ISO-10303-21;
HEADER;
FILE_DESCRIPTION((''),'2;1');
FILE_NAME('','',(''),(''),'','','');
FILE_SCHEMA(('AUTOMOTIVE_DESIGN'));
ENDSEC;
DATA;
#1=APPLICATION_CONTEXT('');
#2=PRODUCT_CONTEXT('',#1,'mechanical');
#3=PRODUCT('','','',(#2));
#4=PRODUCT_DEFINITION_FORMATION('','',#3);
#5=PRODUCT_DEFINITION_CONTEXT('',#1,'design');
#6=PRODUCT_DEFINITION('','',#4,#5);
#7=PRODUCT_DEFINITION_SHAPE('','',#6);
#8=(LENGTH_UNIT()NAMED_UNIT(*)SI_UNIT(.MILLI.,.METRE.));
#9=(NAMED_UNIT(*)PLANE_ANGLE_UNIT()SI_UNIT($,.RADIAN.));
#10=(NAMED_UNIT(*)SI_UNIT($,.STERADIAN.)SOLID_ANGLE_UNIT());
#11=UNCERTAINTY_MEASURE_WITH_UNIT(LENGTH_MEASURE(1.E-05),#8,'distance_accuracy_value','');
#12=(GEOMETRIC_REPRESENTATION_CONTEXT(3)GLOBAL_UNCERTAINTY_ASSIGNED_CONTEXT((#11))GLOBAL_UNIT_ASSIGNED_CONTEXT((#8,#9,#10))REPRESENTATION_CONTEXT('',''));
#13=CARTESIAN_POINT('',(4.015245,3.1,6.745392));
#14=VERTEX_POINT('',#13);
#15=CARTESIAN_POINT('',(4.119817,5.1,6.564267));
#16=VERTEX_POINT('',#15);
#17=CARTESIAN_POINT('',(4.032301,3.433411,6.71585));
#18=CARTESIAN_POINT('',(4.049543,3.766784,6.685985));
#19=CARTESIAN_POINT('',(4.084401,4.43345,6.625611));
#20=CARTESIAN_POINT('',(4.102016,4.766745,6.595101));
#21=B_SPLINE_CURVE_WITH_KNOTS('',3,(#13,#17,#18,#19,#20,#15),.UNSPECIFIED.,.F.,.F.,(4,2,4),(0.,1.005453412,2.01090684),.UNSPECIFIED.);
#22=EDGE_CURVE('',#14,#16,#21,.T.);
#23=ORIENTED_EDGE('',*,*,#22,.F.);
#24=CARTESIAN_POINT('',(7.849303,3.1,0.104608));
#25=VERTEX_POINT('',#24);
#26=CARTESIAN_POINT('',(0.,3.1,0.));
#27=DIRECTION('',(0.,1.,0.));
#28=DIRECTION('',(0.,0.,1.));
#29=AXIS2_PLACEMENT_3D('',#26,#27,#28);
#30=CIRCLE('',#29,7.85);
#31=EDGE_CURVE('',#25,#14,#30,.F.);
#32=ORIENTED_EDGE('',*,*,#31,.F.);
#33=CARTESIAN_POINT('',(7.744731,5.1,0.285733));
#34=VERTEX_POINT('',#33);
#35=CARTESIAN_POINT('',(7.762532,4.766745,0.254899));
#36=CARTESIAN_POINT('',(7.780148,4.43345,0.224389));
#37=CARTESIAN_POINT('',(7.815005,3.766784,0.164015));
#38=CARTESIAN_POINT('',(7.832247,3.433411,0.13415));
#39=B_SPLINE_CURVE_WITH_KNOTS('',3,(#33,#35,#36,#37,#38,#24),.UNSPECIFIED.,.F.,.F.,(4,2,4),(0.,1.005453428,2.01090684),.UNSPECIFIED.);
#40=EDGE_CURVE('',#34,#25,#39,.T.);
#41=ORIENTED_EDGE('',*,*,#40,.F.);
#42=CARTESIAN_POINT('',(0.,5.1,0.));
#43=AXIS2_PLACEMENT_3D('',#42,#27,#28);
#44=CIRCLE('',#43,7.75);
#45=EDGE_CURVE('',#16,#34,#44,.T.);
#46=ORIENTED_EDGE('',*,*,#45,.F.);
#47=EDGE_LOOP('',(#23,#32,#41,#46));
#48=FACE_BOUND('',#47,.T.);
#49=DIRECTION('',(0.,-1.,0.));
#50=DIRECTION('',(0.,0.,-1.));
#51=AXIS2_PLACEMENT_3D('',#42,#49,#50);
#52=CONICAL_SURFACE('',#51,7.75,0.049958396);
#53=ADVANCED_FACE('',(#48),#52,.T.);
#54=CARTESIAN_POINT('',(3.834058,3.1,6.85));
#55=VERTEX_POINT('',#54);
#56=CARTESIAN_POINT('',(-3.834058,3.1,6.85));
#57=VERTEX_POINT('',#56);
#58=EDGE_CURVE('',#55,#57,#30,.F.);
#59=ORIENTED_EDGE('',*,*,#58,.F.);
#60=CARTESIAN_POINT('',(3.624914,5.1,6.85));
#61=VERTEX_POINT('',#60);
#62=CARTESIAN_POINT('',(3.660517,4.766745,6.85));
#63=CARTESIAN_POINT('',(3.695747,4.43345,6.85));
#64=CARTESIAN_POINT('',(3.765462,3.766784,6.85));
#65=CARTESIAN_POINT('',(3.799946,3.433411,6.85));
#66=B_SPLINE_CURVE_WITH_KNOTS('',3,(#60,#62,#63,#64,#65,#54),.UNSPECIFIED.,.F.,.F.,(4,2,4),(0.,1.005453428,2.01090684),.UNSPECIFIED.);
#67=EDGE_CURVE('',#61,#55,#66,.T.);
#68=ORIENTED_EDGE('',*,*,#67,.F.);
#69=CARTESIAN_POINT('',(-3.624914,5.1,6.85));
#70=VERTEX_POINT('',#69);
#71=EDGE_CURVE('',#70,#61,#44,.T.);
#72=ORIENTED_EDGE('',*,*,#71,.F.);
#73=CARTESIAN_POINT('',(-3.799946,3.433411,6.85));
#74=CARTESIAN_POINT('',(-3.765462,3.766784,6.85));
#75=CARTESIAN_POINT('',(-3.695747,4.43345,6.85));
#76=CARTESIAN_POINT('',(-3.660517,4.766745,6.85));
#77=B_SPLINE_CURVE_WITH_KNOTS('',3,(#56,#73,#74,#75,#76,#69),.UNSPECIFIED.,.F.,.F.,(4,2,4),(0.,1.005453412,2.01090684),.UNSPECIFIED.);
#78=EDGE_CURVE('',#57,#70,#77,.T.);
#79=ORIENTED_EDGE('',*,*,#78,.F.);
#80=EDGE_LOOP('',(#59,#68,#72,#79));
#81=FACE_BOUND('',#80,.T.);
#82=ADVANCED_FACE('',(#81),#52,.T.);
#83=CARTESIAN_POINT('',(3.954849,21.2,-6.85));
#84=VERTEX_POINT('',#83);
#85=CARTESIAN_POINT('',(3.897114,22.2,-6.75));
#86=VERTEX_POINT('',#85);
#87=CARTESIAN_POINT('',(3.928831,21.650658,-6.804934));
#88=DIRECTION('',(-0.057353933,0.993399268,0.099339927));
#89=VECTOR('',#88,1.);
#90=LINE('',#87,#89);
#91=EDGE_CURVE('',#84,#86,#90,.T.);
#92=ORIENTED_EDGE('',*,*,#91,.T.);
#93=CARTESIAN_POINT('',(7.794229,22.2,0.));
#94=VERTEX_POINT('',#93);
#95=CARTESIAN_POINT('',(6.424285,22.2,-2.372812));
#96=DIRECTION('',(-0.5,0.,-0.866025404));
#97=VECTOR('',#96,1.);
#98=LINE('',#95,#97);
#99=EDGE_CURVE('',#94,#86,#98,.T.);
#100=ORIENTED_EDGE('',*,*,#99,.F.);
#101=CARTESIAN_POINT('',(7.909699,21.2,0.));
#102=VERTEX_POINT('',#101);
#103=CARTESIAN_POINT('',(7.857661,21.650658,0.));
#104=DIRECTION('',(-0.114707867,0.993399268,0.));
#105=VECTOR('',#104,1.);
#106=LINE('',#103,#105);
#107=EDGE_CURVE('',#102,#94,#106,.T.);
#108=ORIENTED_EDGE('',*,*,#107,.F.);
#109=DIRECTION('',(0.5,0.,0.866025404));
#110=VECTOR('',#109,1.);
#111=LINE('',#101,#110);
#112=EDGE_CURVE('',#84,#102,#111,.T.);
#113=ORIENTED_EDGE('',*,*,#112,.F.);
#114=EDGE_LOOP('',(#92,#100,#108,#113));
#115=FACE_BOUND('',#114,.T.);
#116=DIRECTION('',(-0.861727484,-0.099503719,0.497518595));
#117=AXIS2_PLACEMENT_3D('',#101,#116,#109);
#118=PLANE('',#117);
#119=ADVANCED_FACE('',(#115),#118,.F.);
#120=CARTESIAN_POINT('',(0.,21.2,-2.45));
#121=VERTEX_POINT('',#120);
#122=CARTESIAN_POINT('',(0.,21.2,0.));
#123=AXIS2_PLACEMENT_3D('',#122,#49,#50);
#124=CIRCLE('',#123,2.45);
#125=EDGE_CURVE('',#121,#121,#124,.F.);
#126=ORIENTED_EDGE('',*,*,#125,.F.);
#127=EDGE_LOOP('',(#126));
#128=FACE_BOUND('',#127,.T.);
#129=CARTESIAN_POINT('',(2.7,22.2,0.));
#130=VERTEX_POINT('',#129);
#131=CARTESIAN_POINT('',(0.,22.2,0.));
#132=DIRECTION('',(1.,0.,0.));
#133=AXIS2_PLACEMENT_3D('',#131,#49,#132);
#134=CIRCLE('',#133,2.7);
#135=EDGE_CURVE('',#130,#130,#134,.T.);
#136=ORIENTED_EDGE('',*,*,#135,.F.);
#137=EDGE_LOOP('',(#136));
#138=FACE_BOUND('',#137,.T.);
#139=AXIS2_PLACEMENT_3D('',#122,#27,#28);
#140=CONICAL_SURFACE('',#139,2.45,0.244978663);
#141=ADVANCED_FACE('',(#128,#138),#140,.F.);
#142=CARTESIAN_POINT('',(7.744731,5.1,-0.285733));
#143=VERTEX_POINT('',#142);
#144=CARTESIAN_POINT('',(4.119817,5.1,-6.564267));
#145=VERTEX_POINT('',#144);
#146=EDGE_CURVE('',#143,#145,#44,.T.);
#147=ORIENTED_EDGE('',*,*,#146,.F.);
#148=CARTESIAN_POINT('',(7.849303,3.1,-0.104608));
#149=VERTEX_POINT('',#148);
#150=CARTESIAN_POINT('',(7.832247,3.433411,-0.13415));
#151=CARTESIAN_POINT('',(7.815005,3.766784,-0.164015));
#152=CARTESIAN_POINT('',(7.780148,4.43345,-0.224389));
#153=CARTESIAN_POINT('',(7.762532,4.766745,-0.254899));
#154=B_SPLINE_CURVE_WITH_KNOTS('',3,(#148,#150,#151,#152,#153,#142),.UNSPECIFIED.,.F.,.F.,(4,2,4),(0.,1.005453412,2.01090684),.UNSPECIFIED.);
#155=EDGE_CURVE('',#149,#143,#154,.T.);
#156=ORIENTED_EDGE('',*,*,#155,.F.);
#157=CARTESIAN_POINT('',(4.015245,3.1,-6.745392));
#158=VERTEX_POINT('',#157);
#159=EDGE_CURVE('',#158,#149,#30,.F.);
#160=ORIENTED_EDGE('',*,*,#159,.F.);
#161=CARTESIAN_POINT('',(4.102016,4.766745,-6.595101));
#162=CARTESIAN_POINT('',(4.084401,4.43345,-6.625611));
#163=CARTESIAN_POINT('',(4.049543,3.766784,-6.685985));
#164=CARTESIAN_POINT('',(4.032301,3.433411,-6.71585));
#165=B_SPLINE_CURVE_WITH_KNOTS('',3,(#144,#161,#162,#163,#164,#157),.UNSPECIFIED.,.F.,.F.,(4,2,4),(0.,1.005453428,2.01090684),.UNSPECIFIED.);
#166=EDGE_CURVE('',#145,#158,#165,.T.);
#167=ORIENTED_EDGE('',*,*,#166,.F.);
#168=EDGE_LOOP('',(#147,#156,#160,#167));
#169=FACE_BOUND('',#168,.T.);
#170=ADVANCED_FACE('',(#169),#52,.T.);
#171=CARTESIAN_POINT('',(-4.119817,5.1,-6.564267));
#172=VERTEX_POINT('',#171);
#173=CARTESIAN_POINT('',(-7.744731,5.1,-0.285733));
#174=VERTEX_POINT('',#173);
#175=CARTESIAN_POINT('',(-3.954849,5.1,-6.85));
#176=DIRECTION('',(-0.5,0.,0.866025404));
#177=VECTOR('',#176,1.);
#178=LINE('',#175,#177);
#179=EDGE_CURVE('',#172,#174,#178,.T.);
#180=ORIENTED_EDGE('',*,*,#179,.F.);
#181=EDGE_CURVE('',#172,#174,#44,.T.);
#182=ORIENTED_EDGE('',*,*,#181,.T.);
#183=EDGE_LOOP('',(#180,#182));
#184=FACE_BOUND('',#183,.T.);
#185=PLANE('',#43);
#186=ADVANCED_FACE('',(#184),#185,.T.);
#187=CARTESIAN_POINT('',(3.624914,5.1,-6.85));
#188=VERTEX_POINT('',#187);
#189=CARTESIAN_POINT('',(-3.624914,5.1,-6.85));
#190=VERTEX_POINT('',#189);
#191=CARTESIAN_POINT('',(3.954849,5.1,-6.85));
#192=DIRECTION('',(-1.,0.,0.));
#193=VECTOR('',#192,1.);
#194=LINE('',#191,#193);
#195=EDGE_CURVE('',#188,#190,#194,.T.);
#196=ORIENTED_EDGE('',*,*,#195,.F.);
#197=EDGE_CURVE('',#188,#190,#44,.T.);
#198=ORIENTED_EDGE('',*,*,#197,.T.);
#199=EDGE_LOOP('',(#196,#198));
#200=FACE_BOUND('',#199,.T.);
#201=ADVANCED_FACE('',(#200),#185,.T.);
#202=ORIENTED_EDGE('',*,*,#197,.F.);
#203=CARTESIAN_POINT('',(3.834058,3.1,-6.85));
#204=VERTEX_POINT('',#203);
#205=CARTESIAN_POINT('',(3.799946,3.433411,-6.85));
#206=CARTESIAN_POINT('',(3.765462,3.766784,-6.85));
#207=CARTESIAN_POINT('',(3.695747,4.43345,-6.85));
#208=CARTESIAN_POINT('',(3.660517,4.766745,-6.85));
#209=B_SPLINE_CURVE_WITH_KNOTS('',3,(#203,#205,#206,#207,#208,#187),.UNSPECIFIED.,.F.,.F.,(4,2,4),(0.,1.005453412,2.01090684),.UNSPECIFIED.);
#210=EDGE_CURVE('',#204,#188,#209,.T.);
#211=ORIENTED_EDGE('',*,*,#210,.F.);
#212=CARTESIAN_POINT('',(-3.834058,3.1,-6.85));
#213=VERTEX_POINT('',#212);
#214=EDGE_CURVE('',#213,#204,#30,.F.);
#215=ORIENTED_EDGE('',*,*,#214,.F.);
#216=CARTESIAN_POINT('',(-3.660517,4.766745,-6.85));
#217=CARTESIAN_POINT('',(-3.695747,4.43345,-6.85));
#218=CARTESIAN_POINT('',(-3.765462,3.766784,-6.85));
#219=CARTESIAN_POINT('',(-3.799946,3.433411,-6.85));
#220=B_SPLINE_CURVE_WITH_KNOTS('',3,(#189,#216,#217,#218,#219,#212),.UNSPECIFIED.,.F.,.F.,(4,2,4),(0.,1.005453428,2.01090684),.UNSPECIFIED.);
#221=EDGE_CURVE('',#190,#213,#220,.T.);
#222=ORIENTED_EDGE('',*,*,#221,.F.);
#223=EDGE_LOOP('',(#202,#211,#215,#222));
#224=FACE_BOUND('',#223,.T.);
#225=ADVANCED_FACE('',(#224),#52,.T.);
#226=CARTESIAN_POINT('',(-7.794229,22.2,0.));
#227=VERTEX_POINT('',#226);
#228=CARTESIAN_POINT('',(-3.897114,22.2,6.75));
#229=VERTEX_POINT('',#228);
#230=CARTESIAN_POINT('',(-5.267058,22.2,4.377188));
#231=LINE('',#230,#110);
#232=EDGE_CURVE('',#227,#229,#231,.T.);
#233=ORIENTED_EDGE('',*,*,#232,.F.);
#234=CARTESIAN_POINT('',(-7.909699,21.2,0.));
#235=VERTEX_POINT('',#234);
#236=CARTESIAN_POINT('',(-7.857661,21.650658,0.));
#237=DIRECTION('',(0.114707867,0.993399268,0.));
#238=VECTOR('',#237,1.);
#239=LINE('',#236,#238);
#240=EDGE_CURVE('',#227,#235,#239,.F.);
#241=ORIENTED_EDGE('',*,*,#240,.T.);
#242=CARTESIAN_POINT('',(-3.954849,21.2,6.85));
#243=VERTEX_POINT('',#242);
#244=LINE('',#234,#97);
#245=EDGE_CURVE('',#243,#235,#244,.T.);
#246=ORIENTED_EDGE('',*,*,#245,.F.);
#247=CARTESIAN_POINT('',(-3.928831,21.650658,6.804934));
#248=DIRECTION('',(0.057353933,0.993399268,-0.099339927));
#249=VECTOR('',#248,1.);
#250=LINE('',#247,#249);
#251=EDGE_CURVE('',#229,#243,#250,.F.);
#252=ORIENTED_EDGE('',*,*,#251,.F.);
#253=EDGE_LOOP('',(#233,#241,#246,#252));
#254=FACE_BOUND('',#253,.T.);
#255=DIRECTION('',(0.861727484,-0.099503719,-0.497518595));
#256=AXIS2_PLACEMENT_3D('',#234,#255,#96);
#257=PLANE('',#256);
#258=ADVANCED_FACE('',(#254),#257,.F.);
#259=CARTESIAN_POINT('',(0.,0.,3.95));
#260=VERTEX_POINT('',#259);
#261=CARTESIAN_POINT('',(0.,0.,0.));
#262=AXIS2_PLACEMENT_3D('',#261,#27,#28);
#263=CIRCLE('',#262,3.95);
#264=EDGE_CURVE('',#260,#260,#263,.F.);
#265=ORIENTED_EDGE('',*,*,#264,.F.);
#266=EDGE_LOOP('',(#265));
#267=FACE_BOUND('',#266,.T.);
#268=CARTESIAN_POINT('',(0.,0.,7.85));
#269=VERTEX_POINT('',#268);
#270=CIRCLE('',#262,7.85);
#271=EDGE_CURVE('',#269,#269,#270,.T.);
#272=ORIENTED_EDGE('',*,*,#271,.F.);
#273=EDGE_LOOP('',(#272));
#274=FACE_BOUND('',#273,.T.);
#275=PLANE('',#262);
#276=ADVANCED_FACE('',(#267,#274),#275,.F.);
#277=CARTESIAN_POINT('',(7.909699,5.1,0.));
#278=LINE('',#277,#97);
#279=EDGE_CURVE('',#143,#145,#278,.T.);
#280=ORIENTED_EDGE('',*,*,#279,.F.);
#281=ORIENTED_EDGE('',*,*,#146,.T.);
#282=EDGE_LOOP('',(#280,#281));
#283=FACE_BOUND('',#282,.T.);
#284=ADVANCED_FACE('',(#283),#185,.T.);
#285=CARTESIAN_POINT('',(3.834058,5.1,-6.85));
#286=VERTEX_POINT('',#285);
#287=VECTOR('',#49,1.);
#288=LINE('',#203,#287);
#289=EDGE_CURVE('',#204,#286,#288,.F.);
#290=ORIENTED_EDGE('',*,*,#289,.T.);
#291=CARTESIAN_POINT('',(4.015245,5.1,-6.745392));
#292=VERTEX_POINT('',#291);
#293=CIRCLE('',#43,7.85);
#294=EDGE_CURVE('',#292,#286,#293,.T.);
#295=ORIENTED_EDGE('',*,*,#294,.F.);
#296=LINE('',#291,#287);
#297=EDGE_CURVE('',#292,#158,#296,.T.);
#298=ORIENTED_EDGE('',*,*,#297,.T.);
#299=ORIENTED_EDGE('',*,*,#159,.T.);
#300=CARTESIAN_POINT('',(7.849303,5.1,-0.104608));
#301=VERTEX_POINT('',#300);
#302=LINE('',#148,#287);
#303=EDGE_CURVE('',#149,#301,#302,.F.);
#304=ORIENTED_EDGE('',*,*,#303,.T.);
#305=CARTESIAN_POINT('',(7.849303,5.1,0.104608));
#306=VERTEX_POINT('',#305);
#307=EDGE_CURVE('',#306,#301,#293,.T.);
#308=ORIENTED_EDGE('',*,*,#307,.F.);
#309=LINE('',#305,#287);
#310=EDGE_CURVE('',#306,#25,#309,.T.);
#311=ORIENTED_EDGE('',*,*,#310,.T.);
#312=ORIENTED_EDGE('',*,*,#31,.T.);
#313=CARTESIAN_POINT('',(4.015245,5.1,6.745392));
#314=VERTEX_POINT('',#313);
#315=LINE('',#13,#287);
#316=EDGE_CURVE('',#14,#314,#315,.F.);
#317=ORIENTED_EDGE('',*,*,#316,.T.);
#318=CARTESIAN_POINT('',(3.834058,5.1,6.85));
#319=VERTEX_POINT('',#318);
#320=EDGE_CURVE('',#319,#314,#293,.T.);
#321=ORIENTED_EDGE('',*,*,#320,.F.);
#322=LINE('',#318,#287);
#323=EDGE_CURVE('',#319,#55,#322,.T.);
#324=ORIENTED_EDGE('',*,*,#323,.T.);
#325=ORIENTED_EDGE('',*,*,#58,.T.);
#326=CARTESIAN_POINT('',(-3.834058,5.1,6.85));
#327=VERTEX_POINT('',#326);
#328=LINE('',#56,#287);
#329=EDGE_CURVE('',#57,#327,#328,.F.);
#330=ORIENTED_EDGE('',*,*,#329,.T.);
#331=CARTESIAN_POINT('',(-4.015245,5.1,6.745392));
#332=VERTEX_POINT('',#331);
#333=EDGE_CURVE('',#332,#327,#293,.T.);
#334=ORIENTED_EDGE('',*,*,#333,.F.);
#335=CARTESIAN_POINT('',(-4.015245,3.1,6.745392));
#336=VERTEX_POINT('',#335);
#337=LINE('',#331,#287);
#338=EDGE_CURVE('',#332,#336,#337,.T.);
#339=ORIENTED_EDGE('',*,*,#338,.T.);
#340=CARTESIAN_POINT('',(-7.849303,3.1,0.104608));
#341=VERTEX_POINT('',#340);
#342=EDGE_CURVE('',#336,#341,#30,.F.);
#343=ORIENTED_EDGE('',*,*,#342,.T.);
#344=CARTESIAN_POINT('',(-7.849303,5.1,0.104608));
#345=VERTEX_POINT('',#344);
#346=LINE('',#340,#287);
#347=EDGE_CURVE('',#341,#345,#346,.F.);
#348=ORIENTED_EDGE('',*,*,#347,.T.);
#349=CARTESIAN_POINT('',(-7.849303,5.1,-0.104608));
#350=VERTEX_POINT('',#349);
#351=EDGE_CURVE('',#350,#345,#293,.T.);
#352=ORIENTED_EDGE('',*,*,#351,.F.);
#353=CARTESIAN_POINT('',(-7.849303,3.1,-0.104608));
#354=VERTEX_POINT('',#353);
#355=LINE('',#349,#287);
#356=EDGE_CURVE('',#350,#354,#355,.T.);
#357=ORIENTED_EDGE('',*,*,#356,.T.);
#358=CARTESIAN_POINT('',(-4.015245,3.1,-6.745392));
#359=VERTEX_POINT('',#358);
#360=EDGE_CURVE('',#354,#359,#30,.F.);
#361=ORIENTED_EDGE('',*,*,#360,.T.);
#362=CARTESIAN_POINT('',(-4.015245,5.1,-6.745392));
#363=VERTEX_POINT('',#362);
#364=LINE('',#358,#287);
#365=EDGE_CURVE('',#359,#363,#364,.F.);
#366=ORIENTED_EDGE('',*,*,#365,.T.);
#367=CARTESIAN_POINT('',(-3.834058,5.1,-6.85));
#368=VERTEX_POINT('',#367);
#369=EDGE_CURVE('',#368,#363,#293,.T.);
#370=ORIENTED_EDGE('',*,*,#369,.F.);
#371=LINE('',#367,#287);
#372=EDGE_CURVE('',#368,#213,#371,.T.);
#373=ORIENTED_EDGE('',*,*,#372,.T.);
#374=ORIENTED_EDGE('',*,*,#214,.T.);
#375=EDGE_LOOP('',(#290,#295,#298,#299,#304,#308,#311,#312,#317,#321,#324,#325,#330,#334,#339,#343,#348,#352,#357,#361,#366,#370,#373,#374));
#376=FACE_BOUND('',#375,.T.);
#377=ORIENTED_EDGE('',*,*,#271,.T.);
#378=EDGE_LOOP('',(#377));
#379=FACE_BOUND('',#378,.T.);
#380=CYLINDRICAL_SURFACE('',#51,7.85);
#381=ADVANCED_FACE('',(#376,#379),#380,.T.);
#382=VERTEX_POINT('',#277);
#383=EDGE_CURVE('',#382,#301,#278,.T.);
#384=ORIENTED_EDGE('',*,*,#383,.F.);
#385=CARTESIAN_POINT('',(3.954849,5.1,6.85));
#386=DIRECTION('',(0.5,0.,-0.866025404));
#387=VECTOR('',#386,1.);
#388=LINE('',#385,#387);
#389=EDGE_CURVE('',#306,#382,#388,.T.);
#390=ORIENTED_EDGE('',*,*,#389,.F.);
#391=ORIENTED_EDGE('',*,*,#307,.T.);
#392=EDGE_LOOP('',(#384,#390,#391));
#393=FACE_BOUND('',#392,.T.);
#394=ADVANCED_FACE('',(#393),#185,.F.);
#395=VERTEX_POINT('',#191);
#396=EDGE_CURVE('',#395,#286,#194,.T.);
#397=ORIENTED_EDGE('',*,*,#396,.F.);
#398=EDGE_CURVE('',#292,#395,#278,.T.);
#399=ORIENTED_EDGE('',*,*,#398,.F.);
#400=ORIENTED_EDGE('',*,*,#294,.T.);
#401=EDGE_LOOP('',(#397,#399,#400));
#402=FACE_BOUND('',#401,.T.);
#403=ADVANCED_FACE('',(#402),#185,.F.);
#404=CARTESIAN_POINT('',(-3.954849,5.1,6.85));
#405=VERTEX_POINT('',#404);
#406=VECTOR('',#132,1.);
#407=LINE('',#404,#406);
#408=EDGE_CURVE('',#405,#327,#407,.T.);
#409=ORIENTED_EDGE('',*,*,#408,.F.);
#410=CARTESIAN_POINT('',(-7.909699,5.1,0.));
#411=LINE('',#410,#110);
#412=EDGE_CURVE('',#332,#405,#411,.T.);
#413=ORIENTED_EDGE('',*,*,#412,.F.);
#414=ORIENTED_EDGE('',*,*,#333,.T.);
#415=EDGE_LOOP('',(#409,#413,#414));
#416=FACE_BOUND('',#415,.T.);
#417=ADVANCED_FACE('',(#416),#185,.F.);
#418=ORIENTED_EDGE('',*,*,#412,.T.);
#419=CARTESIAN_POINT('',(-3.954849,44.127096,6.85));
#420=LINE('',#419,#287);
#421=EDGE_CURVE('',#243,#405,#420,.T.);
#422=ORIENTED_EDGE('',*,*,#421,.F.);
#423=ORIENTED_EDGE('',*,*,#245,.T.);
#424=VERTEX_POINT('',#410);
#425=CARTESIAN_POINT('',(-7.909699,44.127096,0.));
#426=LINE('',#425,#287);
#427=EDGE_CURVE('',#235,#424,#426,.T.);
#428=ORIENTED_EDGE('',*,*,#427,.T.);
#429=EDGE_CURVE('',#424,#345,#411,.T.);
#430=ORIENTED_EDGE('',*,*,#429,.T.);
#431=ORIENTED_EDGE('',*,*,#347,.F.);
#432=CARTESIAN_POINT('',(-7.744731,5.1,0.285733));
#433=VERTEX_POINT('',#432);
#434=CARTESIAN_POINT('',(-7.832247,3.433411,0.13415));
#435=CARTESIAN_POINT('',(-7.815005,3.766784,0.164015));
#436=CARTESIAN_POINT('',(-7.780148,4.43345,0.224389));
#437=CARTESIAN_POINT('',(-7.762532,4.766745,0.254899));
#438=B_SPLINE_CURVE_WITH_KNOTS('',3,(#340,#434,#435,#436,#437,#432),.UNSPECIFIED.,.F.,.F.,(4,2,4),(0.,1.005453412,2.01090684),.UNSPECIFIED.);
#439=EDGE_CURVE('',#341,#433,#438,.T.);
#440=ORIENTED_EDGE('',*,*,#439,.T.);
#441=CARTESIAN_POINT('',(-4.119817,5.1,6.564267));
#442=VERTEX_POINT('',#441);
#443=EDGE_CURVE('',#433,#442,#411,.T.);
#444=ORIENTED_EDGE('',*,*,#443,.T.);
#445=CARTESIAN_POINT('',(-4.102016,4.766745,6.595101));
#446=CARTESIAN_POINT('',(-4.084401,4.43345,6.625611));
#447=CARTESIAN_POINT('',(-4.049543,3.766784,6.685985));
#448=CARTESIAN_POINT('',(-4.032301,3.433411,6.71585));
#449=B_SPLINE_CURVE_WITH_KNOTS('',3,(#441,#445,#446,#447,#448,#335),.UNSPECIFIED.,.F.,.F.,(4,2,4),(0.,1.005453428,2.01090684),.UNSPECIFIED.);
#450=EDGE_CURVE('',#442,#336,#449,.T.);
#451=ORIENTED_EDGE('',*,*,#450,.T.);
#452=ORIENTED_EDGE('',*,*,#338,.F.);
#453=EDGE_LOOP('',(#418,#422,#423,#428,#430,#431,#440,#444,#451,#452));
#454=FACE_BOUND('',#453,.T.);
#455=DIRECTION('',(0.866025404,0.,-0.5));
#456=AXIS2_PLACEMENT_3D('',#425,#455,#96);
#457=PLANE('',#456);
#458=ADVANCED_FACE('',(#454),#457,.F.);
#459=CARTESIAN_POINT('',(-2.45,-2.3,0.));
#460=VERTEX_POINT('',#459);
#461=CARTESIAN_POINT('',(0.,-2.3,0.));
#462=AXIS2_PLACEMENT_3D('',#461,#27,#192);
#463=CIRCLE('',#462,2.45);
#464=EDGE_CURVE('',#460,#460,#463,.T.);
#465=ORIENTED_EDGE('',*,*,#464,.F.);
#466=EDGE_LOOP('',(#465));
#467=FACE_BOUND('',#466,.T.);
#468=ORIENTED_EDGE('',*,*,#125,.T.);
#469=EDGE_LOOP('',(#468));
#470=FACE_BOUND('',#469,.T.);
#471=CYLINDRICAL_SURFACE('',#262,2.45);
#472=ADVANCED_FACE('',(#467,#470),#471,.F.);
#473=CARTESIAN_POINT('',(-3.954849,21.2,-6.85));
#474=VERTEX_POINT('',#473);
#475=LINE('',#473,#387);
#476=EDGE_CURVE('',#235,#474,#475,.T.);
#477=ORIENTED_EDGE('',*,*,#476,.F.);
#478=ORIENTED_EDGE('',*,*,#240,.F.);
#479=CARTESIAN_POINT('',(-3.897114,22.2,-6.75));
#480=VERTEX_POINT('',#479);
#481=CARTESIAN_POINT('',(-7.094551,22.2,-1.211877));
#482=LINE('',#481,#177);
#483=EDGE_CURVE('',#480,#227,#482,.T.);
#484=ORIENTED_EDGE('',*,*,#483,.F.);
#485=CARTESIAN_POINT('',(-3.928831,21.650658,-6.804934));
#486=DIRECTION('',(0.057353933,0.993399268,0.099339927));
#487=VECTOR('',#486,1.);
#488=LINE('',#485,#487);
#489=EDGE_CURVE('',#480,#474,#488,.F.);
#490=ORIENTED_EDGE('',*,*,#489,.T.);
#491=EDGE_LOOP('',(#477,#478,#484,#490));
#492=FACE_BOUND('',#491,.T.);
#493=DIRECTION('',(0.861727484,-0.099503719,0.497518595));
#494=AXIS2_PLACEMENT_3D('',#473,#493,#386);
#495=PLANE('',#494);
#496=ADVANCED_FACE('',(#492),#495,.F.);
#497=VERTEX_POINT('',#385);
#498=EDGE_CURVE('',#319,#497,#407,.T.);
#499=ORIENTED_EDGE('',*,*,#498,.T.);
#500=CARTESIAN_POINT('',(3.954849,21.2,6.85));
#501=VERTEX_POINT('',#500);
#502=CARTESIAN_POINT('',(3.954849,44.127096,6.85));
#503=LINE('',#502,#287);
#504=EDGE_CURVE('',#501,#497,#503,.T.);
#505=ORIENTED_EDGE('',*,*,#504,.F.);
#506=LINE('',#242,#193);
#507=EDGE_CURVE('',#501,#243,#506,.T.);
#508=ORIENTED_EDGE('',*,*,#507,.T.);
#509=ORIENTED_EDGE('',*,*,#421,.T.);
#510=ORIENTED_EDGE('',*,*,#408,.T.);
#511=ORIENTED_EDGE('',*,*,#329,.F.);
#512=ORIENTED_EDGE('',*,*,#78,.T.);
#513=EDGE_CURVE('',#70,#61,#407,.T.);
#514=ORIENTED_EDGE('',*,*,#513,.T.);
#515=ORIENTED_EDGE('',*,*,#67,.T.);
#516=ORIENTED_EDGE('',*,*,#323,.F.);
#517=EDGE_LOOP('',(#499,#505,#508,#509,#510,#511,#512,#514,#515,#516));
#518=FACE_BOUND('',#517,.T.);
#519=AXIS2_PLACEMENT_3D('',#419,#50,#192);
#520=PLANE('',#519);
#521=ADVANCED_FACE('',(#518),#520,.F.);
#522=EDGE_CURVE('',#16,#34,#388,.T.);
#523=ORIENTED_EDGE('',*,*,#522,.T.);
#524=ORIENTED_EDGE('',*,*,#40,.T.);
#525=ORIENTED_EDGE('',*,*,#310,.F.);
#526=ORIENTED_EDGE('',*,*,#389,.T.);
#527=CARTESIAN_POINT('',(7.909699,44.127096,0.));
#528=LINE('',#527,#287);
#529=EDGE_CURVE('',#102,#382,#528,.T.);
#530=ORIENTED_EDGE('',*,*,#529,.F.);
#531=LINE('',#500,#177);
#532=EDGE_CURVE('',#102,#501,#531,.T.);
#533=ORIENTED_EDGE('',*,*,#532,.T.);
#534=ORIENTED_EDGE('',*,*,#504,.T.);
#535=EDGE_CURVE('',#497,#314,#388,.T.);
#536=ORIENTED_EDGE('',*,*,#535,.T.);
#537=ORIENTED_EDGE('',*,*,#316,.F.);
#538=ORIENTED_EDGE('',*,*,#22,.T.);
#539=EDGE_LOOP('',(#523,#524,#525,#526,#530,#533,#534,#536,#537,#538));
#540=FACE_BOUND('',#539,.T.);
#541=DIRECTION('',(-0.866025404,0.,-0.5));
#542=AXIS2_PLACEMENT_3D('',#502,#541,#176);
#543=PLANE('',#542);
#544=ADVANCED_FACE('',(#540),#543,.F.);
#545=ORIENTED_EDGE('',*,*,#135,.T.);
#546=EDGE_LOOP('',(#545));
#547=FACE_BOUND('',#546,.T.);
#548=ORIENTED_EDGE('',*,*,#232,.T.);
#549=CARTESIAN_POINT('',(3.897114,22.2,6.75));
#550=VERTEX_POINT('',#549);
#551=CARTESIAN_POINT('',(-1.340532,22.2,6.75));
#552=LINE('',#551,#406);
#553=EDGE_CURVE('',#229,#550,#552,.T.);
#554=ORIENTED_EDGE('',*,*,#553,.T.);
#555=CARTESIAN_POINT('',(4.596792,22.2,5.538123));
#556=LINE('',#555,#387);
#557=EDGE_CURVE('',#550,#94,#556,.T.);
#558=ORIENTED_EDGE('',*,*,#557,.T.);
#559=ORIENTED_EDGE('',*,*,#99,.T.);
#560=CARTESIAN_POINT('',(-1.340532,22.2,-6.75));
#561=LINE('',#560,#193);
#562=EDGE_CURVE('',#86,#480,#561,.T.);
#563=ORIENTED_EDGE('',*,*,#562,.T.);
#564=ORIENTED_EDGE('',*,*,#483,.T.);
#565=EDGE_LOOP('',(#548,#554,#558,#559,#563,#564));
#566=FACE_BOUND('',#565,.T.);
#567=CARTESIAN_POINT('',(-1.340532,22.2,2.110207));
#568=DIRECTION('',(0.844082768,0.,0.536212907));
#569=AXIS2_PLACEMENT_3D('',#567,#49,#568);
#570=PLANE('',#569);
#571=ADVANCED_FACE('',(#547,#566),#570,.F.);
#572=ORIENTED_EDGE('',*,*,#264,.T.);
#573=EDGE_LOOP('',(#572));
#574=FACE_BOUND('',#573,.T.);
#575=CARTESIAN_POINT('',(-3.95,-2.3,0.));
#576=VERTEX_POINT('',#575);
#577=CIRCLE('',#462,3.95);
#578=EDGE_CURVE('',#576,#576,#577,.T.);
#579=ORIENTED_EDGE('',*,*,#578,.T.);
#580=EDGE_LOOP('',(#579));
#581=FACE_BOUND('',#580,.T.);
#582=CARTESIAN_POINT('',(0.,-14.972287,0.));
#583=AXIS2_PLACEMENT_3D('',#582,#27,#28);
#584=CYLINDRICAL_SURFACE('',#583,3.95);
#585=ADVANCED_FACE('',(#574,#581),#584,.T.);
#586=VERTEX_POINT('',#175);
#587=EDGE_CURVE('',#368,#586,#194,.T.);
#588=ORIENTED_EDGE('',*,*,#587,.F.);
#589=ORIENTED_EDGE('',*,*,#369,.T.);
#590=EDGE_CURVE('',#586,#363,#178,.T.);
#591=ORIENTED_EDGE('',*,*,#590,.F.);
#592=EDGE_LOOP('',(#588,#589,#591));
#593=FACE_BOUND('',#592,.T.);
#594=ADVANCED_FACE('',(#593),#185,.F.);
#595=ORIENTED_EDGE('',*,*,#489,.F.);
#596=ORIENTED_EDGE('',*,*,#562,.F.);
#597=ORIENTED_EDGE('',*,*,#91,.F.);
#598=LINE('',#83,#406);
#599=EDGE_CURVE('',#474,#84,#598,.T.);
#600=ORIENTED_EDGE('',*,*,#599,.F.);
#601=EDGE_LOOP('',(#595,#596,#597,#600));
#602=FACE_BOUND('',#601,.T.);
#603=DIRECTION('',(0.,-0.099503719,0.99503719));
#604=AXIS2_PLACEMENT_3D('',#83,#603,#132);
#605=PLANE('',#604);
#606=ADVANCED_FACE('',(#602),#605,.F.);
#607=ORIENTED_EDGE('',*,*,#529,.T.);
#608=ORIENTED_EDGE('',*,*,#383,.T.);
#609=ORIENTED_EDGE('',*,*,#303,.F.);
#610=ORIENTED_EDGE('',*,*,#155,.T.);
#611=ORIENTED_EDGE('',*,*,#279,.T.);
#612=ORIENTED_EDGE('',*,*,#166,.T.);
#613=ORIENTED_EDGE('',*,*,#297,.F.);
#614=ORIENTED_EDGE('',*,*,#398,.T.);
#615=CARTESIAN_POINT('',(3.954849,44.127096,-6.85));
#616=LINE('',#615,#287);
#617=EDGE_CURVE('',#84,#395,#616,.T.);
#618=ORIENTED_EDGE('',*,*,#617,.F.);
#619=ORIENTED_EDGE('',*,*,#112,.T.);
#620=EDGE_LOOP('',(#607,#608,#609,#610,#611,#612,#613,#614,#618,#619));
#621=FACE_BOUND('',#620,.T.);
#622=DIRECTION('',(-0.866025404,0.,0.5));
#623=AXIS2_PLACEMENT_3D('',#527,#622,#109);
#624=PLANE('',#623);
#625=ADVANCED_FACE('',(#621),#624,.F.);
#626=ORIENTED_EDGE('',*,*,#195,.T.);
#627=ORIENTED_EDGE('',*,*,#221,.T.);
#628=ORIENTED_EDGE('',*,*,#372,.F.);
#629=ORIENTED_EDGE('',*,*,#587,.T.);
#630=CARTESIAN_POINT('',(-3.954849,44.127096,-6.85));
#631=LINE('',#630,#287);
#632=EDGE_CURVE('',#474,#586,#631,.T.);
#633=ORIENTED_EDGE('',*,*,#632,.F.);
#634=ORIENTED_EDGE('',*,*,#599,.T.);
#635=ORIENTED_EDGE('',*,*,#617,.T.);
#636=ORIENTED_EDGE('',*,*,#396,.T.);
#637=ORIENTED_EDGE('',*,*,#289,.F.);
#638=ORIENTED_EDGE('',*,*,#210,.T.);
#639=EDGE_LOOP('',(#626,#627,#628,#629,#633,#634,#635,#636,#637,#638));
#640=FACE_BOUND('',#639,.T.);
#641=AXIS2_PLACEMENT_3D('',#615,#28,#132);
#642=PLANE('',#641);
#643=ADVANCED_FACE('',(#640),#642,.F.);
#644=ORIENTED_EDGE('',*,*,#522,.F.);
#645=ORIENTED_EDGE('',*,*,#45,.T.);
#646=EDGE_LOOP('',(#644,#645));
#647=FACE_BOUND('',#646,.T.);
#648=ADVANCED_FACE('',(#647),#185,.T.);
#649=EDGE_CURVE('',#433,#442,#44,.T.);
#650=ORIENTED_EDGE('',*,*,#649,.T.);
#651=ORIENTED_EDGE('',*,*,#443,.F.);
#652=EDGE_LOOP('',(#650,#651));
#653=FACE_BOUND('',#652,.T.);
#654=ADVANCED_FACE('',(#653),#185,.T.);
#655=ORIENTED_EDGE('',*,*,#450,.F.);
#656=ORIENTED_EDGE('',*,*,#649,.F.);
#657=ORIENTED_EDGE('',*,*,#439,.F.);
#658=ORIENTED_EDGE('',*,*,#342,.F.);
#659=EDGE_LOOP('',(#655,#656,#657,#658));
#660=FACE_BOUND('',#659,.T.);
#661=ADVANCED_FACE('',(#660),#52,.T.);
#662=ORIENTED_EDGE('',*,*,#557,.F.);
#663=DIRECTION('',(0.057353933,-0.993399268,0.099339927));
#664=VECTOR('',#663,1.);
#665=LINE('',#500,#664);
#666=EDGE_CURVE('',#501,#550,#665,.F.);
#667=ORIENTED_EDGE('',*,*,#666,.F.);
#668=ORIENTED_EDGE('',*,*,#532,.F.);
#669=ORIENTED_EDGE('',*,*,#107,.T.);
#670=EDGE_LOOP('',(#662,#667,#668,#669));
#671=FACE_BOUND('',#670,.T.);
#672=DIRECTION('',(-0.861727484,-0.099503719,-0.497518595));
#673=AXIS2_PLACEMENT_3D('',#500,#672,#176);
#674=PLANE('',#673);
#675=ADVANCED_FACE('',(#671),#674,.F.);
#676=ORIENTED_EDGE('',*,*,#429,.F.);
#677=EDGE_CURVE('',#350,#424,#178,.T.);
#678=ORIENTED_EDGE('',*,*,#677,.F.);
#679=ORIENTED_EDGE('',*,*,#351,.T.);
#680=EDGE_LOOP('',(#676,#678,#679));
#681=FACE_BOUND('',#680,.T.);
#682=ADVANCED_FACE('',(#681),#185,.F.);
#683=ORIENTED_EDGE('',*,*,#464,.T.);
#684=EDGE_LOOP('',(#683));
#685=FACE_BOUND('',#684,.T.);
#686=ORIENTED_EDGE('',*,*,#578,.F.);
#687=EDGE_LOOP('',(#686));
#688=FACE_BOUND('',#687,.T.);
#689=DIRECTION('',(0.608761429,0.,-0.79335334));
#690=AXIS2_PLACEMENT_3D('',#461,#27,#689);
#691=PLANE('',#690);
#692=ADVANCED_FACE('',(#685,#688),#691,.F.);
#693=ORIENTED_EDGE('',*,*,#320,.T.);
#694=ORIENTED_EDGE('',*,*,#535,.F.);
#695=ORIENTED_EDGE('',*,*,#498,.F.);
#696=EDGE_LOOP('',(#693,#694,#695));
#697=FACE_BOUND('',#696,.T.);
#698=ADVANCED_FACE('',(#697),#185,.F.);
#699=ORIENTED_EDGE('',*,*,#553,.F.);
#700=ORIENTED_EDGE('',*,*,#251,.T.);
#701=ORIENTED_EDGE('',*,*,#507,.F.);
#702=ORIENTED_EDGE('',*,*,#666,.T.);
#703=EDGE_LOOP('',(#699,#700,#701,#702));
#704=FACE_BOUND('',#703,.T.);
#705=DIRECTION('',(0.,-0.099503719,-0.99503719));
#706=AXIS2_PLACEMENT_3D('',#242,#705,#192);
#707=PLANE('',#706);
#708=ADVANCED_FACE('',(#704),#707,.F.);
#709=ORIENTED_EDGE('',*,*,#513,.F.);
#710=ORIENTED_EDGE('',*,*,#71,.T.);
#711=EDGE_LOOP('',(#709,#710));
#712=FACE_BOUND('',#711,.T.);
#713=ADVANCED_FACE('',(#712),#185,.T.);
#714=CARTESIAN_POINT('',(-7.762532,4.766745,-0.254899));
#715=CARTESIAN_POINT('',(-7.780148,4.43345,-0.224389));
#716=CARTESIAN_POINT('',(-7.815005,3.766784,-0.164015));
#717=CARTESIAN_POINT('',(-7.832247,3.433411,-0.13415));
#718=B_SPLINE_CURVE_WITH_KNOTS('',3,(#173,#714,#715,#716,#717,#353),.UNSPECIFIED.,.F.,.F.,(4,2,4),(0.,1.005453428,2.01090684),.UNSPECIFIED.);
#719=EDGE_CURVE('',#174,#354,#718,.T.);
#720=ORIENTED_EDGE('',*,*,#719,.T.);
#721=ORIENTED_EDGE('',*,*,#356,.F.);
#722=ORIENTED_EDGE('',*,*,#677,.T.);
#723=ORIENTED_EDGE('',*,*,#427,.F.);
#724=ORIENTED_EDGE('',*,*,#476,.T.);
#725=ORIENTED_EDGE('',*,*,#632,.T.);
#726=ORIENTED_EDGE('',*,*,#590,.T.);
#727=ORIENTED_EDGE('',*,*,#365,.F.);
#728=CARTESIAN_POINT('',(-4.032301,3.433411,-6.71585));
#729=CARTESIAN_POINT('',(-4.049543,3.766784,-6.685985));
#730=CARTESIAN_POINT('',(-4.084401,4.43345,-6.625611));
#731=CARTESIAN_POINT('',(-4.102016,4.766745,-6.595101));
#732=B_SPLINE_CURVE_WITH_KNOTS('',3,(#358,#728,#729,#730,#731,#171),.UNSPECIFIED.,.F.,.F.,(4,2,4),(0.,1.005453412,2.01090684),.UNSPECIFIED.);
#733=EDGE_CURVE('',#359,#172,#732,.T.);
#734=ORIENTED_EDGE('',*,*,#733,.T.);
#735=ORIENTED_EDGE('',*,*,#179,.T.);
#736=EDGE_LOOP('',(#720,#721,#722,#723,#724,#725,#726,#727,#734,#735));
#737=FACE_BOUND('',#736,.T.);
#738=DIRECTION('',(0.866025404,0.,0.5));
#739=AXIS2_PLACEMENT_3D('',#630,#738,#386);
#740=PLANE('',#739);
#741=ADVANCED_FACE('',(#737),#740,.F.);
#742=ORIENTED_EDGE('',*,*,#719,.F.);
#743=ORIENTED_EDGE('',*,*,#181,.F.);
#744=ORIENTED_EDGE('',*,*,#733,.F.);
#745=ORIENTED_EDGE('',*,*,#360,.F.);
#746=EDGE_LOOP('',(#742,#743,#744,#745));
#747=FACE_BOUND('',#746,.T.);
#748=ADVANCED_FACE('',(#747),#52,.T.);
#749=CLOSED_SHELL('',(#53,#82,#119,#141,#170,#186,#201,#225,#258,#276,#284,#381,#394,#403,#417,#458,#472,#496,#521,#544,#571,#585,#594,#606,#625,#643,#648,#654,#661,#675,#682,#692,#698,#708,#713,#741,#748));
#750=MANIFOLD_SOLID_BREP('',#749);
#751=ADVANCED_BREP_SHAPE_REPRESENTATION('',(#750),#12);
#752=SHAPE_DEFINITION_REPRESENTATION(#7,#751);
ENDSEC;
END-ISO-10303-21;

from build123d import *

# Parameters (mm, degrees)
SKETCH1_R           = 7.85
BOSS_EXTRUDE1_DEPTH = 5.1
BOSS_EXTRUDE2_DEPTH = 17.1
CHAMFER1_SIZE       = 2
CHAMFER1_SIZE_2     = 0.1
CHAMFER2_SIZE       = 0.1
CHAMFER2_SIZE2      = 1
SKETCH3_R           = 2.45
CUT_EXTRUDE1_DEPTH  = 25.840004697
SKETCH4_R           = 3.95
SKETCH4_R_2         = 2.45
BOSS_EXTRUDE3_DEPTH = 2.3
CHAMFER4_SIZE       = 0.25
CHAMFER4_SIZE2      = 1


with BuildPart() as part:
    # Sketch1 → Boss-Extrude1 (new body)
    with BuildSketch(Plane(origin=(0, 0, 0), x_dir=(1, 0, 0), z_dir=(0, 1, 0))):
        with Locations(Location((0, 0, 0), (0, 0, 270))):
            Circle(SKETCH1_R)
    extrude(amount=BOSS_EXTRUDE1_DEPTH)

    # Sketch2 → Boss-Extrude2 (add)
    with BuildSketch(Plane(origin=(0, 5.1, 0), x_dir=(1, 0, 0), z_dir=(0, 1, 0))):
        Polygon((3.954849344, -6.85), (7.909698688, 0), (3.954849344, 6.85), (-3.954849344, 6.85), (-7.909698688, 0), (-3.954849344, -6.85), align=None)
    extrude(amount=BOSS_EXTRUDE2_DEPTH)

    # Chamfer1
    # the kernel refuses this chamfer: 2, 0.1 mm, written as the material it takes off along each edge
    with BuildSketch(Plane(origin=(0, 5.1, 0), x_dir=(-0.12524723845316335, 0, 0.9921255612370121), z_dir=(-0.9921255612370121, 0, -0.12524723845316335))) as chamfer1_piece_1_section:
        Polygon((7.85, -CHAMFER1_SIZE), (7.85 - CHAMFER1_SIZE_2, 0), (7.85, 0), align=None)
    chamfer1_piece_1 = revolve(axis=Axis((0, 5.1, 0), (0, 1, 0)), revolution_arc=134.390067419, mode=Mode.PRIVATE)
    chamfer1_piece_1 = split(chamfer1_piece_1, bisect_by=Plane(origin=(1.492584192, 4.100393964, 6.85), z_dir=(0, 0, 1)), keep=Keep.TOP, mode=Mode.PRIVATE)
    add(chamfer1_piece_1, mode=Mode.SUBTRACT)
    with BuildSketch(Plane(origin=(0, 5.1, 0), x_dir=(-0.12524723845316335, 0, 0.9921255612370121), z_dir=(-0.9921255612370121, 0, -0.12524723845316335))) as chamfer1_piece_2_section:
        Polygon((7.85, -CHAMFER1_SIZE), (7.85 - CHAMFER1_SIZE_2, 0), (7.85, 0), align=None)
    chamfer1_piece_2 = revolve(axis=Axis((0, 5.1, 0), (0, 1, 0)), revolution_arc=134.390067419, mode=Mode.PRIVATE)
    chamfer1_piece_2 = split(chamfer1_piece_2, bisect_by=Plane(origin=(5.932274016, 4.100460799, 3.425), z_dir=(0.8660254037844386, 0, 0.5000000000000001)), keep=Keep.TOP, mode=Mode.PRIVATE)
    add(chamfer1_piece_2, mode=Mode.SUBTRACT)
    with BuildSketch(Plane(origin=(0, 5.1, 0), x_dir=(-0.12524723845316335, 0, 0.9921255612370121), z_dir=(-0.9921255612370121, 0, -0.12524723845316335))) as chamfer1_piece_3_section:
        Polygon((7.85, -CHAMFER1_SIZE), (7.85 - CHAMFER1_SIZE_2, 0), (7.85, 0), align=None)
    chamfer1_piece_3 = revolve(axis=Axis((0, 5.1, 0), (0, 1, 0)), revolution_arc=134.390067419, mode=Mode.PRIVATE)
    chamfer1_piece_3 = split(chamfer1_piece_3, bisect_by=Plane(origin=(6.678566112, 4.100393964, -2.132384173), z_dir=(0.8660254037844385, 0, -0.5000000000000003)), keep=Keep.TOP, mode=Mode.PRIVATE)
    add(chamfer1_piece_3, mode=Mode.SUBTRACT)
    with BuildSketch(Plane(origin=(0, 5.1, 0), x_dir=(0.796582320548557, 0, 0.6045300708728027), z_dir=(-0.6045300708728027, 0, 0.796582320548557))) as chamfer1_piece_4_section:
        Polygon((7.85, -CHAMFER1_SIZE), (7.85 - CHAMFER1_SIZE_2, 0), (7.85, 0), align=None)
    chamfer1_piece_4 = revolve(axis=Axis((0, 5.1, 0), (0, 1, 0)), revolution_arc=134.390067419, mode=Mode.PRIVATE)
    chamfer1_piece_4 = split(chamfer1_piece_4, bisect_by=Plane(origin=(6.678566112, 4.100393964, 2.132384173), z_dir=(0.8660254037844386, 0, 0.5000000000000001)), keep=Keep.TOP, mode=Mode.PRIVATE)
    add(chamfer1_piece_4, mode=Mode.SUBTRACT)
    with BuildSketch(Plane(origin=(0, 5.1, 0), x_dir=(0.796582320548557, 0, 0.6045300708728027), z_dir=(-0.6045300708728027, 0, 0.796582320548557))) as chamfer1_piece_5_section:
        Polygon((7.85, -CHAMFER1_SIZE), (7.85 - CHAMFER1_SIZE_2, 0), (7.85, 0), align=None)
    chamfer1_piece_5 = revolve(axis=Axis((0, 5.1, 0), (0, 1, 0)), revolution_arc=134.390067419, mode=Mode.PRIVATE)
    chamfer1_piece_5 = split(chamfer1_piece_5, bisect_by=Plane(origin=(5.932274016, 4.100460799, -3.425), z_dir=(0.8660254037844385, 0, -0.5000000000000003)), keep=Keep.TOP, mode=Mode.PRIVATE)
    add(chamfer1_piece_5, mode=Mode.SUBTRACT)
    with BuildSketch(Plane(origin=(0, 5.1, 0), x_dir=(0.796582320548557, 0, 0.6045300708728027), z_dir=(-0.6045300708728027, 0, 0.796582320548557))) as chamfer1_piece_6_section:
        Polygon((7.85, -CHAMFER1_SIZE), (7.85 - CHAMFER1_SIZE_2, 0), (7.85, 0), align=None)
    chamfer1_piece_6 = revolve(axis=Axis((0, 5.1, 0), (0, 1, 0)), revolution_arc=134.390067419, mode=Mode.PRIVATE)
    chamfer1_piece_6 = split(chamfer1_piece_6, bisect_by=Plane(origin=(1.492584192, 4.100393964, -6.85), z_dir=(0, 0, -1)), keep=Keep.TOP, mode=Mode.PRIVATE)
    add(chamfer1_piece_6, mode=Mode.SUBTRACT)
    with BuildSketch(Plane(origin=(0, 5.1, 0), x_dir=(0.9218295590017263, 0, -0.3875954903642235), z_dir=(0.3875954903642235, 0, 0.9218295590017263))) as chamfer1_piece_7_section:
        Polygon((7.85, -CHAMFER1_SIZE), (7.85 - CHAMFER1_SIZE_2, 0), (7.85, 0), align=None)
    chamfer1_piece_7 = revolve(axis=Axis((0, 5.1, 0), (0, 1, 0)), revolution_arc=134.390067419, mode=Mode.PRIVATE)
    chamfer1_piece_7 = split(chamfer1_piece_7, bisect_by=Plane(origin=(5.18598192, 4.100393964, -4.717615827), z_dir=(0.8660254037844385, 0, -0.5000000000000003)), keep=Keep.TOP, mode=Mode.PRIVATE)
    add(chamfer1_piece_7, mode=Mode.SUBTRACT)
    with BuildSketch(Plane(origin=(0, 5.1, 0), x_dir=(0.9218295590017263, 0, -0.3875954903642235), z_dir=(0.3875954903642235, 0, 0.9218295590017263))) as chamfer1_piece_8_section:
        Polygon((7.85, -CHAMFER1_SIZE), (7.85 - CHAMFER1_SIZE_2, 0), (7.85, 0), align=None)
    chamfer1_piece_8 = revolve(axis=Axis((0, 5.1, 0), (0, 1, 0)), revolution_arc=134.390067419, mode=Mode.PRIVATE)
    chamfer1_piece_8 = split(chamfer1_piece_8, bisect_by=Plane(origin=(0, 4.100460799, -6.85), z_dir=(0, 0, -1)), keep=Keep.TOP, mode=Mode.PRIVATE)
    add(chamfer1_piece_8, mode=Mode.SUBTRACT)
    with BuildSketch(Plane(origin=(0, 5.1, 0), x_dir=(0.9218295590017263, 0, -0.3875954903642235), z_dir=(0.3875954903642235, 0, 0.9218295590017263))) as chamfer1_piece_9_section:
        Polygon((7.85, -CHAMFER1_SIZE), (7.85 - CHAMFER1_SIZE_2, 0), (7.85, 0), align=None)
    chamfer1_piece_9 = revolve(axis=Axis((0, 5.1, 0), (0, 1, 0)), revolution_arc=134.390067419, mode=Mode.PRIVATE)
    chamfer1_piece_9 = split(chamfer1_piece_9, bisect_by=Plane(origin=(-5.18598192, 4.100393964, -4.717615827), z_dir=(-0.8660254037844387, 0, -0.49999999999999994)), keep=Keep.TOP, mode=Mode.PRIVATE)
    add(chamfer1_piece_9, mode=Mode.SUBTRACT)
    with BuildSketch(Plane(origin=(0, 5.1, 0), x_dir=(0.12524723845316238, 0, -0.9921255612370122), z_dir=(0.9921255612370122, 0, 0.12524723845316238))) as chamfer1_piece_10_section:
        Polygon((7.85, -CHAMFER1_SIZE), (7.85 - CHAMFER1_SIZE_2, 0), (7.85, 0), align=None)
    chamfer1_piece_10 = revolve(axis=Axis((0, 5.1, 0), (0, 1, 0)), revolution_arc=134.390067419, mode=Mode.PRIVATE)
    chamfer1_piece_10 = split(chamfer1_piece_10, bisect_by=Plane(origin=(-1.492584192, 4.100393964, -6.85), z_dir=(0, 0, -1)), keep=Keep.TOP, mode=Mode.PRIVATE)
    add(chamfer1_piece_10, mode=Mode.SUBTRACT)
    with BuildSketch(Plane(origin=(0, 5.1, 0), x_dir=(0.12524723845316238, 0, -0.9921255612370122), z_dir=(0.9921255612370122, 0, 0.12524723845316238))) as chamfer1_piece_11_section:
        Polygon((7.85, -CHAMFER1_SIZE), (7.85 - CHAMFER1_SIZE_2, 0), (7.85, 0), align=None)
    chamfer1_piece_11 = revolve(axis=Axis((0, 5.1, 0), (0, 1, 0)), revolution_arc=134.390067419, mode=Mode.PRIVATE)
    chamfer1_piece_11 = split(chamfer1_piece_11, bisect_by=Plane(origin=(-5.932274016, 4.100460799, -3.425), z_dir=(-0.8660254037844387, 0, -0.49999999999999994)), keep=Keep.TOP, mode=Mode.PRIVATE)
    add(chamfer1_piece_11, mode=Mode.SUBTRACT)
    with BuildSketch(Plane(origin=(0, 5.1, 0), x_dir=(0.12524723845316238, 0, -0.9921255612370122), z_dir=(0.9921255612370122, 0, 0.12524723845316238))) as chamfer1_piece_12_section:
        Polygon((7.85, -CHAMFER1_SIZE), (7.85 - CHAMFER1_SIZE_2, 0), (7.85, 0), align=None)
    chamfer1_piece_12 = revolve(axis=Axis((0, 5.1, 0), (0, 1, 0)), revolution_arc=134.390067419, mode=Mode.PRIVATE)
    chamfer1_piece_12 = split(chamfer1_piece_12, bisect_by=Plane(origin=(-6.678566112, 4.100393964, 2.132384173), z_dir=(-0.8660254037844386, 0, 0.5000000000000001)), keep=Keep.TOP, mode=Mode.PRIVATE)
    add(chamfer1_piece_12, mode=Mode.SUBTRACT)
    with BuildSketch(Plane(origin=(0, 5.1, 0), x_dir=(-0.7965823205485564, 0, -0.6045300708728035), z_dir=(0.6045300708728035, 0, -0.7965823205485564))) as chamfer1_piece_13_section:
        Polygon((7.85, -CHAMFER1_SIZE), (7.85 - CHAMFER1_SIZE_2, 0), (7.85, 0), align=None)
    chamfer1_piece_13 = revolve(axis=Axis((0, 5.1, 0), (0, 1, 0)), revolution_arc=134.390067419, mode=Mode.PRIVATE)
    chamfer1_piece_13 = split(chamfer1_piece_13, bisect_by=Plane(origin=(-6.678566112, 4.100393964, -2.132384173), z_dir=(-0.8660254037844387, 0, -0.49999999999999994)), keep=Keep.TOP, mode=Mode.PRIVATE)
    add(chamfer1_piece_13, mode=Mode.SUBTRACT)
    with BuildSketch(Plane(origin=(0, 5.1, 0), x_dir=(-0.7965823205485564, 0, -0.6045300708728035), z_dir=(0.6045300708728035, 0, -0.7965823205485564))) as chamfer1_piece_14_section:
        Polygon((7.85, -CHAMFER1_SIZE), (7.85 - CHAMFER1_SIZE_2, 0), (7.85, 0), align=None)
    chamfer1_piece_14 = revolve(axis=Axis((0, 5.1, 0), (0, 1, 0)), revolution_arc=134.390067419, mode=Mode.PRIVATE)
    chamfer1_piece_14 = split(chamfer1_piece_14, bisect_by=Plane(origin=(-5.932274016, 4.100460799, 3.425), z_dir=(-0.8660254037844386, 0, 0.5000000000000001)), keep=Keep.TOP, mode=Mode.PRIVATE)
    add(chamfer1_piece_14, mode=Mode.SUBTRACT)
    with BuildSketch(Plane(origin=(0, 5.1, 0), x_dir=(-0.7965823205485564, 0, -0.6045300708728035), z_dir=(0.6045300708728035, 0, -0.7965823205485564))) as chamfer1_piece_15_section:
        Polygon((7.85, -CHAMFER1_SIZE), (7.85 - CHAMFER1_SIZE_2, 0), (7.85, 0), align=None)
    chamfer1_piece_15 = revolve(axis=Axis((0, 5.1, 0), (0, 1, 0)), revolution_arc=134.390067419, mode=Mode.PRIVATE)
    chamfer1_piece_15 = split(chamfer1_piece_15, bisect_by=Plane(origin=(-1.492584192, 4.100393964, 6.85), z_dir=(0, 0, 1)), keep=Keep.TOP, mode=Mode.PRIVATE)
    add(chamfer1_piece_15, mode=Mode.SUBTRACT)
    with BuildSketch(Plane(origin=(0, 5.1, 0), x_dir=(-0.9217969096478654, 0, 0.38767313211473), z_dir=(-0.38767313211473, 0, -0.9217969096478654))) as chamfer1_piece_16_section:
        Polygon((7.85, -CHAMFER1_SIZE), (7.85 - CHAMFER1_SIZE_2, 0), (7.85, 0), align=None)
    chamfer1_piece_16 = revolve(axis=Axis((0, 5.1, 0), (0, 1, 0)), revolution_arc=67.190207846, mode=Mode.PRIVATE)
    chamfer1_piece_16 = split(chamfer1_piece_16, bisect_by=Plane(origin=(-5.185820577, 4.100393946, 4.717895281), z_dir=(-0.8660254037844386, 0, 0.5000000000000001)), keep=Keep.TOP, mode=Mode.PRIVATE)
    add(chamfer1_piece_16, mode=Mode.SUBTRACT)
    with BuildSketch(Plane(origin=(0, 5.1, 0), x_dir=(-0.9217969096478654, 0, 0.38767313211473), z_dir=(-0.38767313211473, 0, -0.9217969096478654))) as chamfer1_piece_17_section:
        Polygon((7.85, -CHAMFER1_SIZE), (7.85 - CHAMFER1_SIZE_2, 0), (7.85, 0), align=None)
    chamfer1_piece_17 = revolve(axis=Axis((0, 5.1, 0), (0, 1, 0)), revolution_arc=67.190207846, mode=Mode.PRIVATE)
    chamfer1_piece_17 = split(chamfer1_piece_17, bisect_by=Plane(origin=(-1.970388485, 4.100365736, 6.85), z_dir=(0, 0, 1)), keep=Keep.TOP, mode=Mode.PRIVATE)
    add(chamfer1_piece_17, mode=Mode.SUBTRACT)
    with BuildSketch(Plane(origin=(0, 5.1, 0), x_dir=(0, 0, 1), z_dir=(-1, 0, 0))) as chamfer1_piece_18_section:
        Polygon((7.85, -CHAMFER1_SIZE), (7.85 - CHAMFER1_SIZE_2, 0), (7.85, 0), align=None)
    chamfer1_piece_18 = revolve(axis=Axis((0, 5.1, 0), (0, 1, 0)), revolution_arc=67.190207846, mode=Mode.PRIVATE)
    chamfer1_piece_18 = split(chamfer1_piece_18, bisect_by=Plane(origin=(1.970388485, 4.100365736, 6.85), z_dir=(0, 0, 1)), keep=Keep.TOP, mode=Mode.PRIVATE)
    add(chamfer1_piece_18, mode=Mode.SUBTRACT)
    with BuildSketch(Plane(origin=(0, 5.1, 0), x_dir=(0, 0, 1), z_dir=(-1, 0, 0))) as chamfer1_piece_19_section:
        Polygon((7.85, -CHAMFER1_SIZE), (7.85 - CHAMFER1_SIZE_2, 0), (7.85, 0), align=None)
    chamfer1_piece_19 = revolve(axis=Axis((0, 5.1, 0), (0, 1, 0)), revolution_arc=67.190207846, mode=Mode.PRIVATE)
    chamfer1_piece_19 = split(chamfer1_piece_19, bisect_by=Plane(origin=(5.185820577, 4.100393946, 4.717895281), z_dir=(0.8660254037844386, 0, 0.5000000000000001)), keep=Keep.TOP, mode=Mode.PRIVATE)
    add(chamfer1_piece_19, mode=Mode.SUBTRACT)

    # Chamfer2
    chamfer2_edges = [part.edges().sort_by_distance(p)[0] for p in [
        (-5.932274016, 22.2, 3.425),
        (-5.932274016, 22.2, -3.425),
        (0, 22.2, -6.85),
        (5.932274016, 22.2, -3.425),
        (5.932274016, 22.2, 3.425),
        (0, 22.2, 6.85),
    ]]
    chamfer2_side = [part.faces().sort_by_distance(p)[0] for p in [
        (0, 22.2, 0),
    ]]
    chamfer(chamfer2_edges, length=CHAMFER2_SIZE, length2=CHAMFER2_SIZE2, reference=chamfer2_side[0])

    # Sketch3 → Cut-Extrude1 (cut, through all)
    with BuildSketch(Plane(origin=(0, 22.2, 0), x_dir=(1, 0, 0), z_dir=(0, 1, 0))):
        with Locations(Location((0, 0, 0), (0, 0, 270))):
            Circle(SKETCH3_R)
    extrude(amount=-CUT_EXTRUDE1_DEPTH, mode=Mode.SUBTRACT)

    # Sketch4 → Boss-Extrude3 (add)
    with BuildSketch(Plane.XZ):
        with Locations(Location((0, 0, 0), (0, 0, 90))):
            Circle(SKETCH4_R)
        with Locations(Location((0, 0, 0), (0, 0, 90))):
            Circle(SKETCH4_R_2, mode=Mode.SUBTRACT)
    extrude(amount=BOSS_EXTRUDE3_DEPTH)

    # Chamfer4
    chamfer4_edges = [part.edges().sort_by_distance(p)[0] for p in [
        (0, 22.2, -2.45),
    ]]
    chamfer4_side = [part.faces().sort_by_distance(p)[0] for p in [
        (-5.667083262, 22.2, 3.271892047),
    ]]
    chamfer(chamfer4_edges, length=CHAMFER4_SIZE, length2=CHAMFER4_SIZE2, reference=chamfer4_side[0])


solid = part.part
